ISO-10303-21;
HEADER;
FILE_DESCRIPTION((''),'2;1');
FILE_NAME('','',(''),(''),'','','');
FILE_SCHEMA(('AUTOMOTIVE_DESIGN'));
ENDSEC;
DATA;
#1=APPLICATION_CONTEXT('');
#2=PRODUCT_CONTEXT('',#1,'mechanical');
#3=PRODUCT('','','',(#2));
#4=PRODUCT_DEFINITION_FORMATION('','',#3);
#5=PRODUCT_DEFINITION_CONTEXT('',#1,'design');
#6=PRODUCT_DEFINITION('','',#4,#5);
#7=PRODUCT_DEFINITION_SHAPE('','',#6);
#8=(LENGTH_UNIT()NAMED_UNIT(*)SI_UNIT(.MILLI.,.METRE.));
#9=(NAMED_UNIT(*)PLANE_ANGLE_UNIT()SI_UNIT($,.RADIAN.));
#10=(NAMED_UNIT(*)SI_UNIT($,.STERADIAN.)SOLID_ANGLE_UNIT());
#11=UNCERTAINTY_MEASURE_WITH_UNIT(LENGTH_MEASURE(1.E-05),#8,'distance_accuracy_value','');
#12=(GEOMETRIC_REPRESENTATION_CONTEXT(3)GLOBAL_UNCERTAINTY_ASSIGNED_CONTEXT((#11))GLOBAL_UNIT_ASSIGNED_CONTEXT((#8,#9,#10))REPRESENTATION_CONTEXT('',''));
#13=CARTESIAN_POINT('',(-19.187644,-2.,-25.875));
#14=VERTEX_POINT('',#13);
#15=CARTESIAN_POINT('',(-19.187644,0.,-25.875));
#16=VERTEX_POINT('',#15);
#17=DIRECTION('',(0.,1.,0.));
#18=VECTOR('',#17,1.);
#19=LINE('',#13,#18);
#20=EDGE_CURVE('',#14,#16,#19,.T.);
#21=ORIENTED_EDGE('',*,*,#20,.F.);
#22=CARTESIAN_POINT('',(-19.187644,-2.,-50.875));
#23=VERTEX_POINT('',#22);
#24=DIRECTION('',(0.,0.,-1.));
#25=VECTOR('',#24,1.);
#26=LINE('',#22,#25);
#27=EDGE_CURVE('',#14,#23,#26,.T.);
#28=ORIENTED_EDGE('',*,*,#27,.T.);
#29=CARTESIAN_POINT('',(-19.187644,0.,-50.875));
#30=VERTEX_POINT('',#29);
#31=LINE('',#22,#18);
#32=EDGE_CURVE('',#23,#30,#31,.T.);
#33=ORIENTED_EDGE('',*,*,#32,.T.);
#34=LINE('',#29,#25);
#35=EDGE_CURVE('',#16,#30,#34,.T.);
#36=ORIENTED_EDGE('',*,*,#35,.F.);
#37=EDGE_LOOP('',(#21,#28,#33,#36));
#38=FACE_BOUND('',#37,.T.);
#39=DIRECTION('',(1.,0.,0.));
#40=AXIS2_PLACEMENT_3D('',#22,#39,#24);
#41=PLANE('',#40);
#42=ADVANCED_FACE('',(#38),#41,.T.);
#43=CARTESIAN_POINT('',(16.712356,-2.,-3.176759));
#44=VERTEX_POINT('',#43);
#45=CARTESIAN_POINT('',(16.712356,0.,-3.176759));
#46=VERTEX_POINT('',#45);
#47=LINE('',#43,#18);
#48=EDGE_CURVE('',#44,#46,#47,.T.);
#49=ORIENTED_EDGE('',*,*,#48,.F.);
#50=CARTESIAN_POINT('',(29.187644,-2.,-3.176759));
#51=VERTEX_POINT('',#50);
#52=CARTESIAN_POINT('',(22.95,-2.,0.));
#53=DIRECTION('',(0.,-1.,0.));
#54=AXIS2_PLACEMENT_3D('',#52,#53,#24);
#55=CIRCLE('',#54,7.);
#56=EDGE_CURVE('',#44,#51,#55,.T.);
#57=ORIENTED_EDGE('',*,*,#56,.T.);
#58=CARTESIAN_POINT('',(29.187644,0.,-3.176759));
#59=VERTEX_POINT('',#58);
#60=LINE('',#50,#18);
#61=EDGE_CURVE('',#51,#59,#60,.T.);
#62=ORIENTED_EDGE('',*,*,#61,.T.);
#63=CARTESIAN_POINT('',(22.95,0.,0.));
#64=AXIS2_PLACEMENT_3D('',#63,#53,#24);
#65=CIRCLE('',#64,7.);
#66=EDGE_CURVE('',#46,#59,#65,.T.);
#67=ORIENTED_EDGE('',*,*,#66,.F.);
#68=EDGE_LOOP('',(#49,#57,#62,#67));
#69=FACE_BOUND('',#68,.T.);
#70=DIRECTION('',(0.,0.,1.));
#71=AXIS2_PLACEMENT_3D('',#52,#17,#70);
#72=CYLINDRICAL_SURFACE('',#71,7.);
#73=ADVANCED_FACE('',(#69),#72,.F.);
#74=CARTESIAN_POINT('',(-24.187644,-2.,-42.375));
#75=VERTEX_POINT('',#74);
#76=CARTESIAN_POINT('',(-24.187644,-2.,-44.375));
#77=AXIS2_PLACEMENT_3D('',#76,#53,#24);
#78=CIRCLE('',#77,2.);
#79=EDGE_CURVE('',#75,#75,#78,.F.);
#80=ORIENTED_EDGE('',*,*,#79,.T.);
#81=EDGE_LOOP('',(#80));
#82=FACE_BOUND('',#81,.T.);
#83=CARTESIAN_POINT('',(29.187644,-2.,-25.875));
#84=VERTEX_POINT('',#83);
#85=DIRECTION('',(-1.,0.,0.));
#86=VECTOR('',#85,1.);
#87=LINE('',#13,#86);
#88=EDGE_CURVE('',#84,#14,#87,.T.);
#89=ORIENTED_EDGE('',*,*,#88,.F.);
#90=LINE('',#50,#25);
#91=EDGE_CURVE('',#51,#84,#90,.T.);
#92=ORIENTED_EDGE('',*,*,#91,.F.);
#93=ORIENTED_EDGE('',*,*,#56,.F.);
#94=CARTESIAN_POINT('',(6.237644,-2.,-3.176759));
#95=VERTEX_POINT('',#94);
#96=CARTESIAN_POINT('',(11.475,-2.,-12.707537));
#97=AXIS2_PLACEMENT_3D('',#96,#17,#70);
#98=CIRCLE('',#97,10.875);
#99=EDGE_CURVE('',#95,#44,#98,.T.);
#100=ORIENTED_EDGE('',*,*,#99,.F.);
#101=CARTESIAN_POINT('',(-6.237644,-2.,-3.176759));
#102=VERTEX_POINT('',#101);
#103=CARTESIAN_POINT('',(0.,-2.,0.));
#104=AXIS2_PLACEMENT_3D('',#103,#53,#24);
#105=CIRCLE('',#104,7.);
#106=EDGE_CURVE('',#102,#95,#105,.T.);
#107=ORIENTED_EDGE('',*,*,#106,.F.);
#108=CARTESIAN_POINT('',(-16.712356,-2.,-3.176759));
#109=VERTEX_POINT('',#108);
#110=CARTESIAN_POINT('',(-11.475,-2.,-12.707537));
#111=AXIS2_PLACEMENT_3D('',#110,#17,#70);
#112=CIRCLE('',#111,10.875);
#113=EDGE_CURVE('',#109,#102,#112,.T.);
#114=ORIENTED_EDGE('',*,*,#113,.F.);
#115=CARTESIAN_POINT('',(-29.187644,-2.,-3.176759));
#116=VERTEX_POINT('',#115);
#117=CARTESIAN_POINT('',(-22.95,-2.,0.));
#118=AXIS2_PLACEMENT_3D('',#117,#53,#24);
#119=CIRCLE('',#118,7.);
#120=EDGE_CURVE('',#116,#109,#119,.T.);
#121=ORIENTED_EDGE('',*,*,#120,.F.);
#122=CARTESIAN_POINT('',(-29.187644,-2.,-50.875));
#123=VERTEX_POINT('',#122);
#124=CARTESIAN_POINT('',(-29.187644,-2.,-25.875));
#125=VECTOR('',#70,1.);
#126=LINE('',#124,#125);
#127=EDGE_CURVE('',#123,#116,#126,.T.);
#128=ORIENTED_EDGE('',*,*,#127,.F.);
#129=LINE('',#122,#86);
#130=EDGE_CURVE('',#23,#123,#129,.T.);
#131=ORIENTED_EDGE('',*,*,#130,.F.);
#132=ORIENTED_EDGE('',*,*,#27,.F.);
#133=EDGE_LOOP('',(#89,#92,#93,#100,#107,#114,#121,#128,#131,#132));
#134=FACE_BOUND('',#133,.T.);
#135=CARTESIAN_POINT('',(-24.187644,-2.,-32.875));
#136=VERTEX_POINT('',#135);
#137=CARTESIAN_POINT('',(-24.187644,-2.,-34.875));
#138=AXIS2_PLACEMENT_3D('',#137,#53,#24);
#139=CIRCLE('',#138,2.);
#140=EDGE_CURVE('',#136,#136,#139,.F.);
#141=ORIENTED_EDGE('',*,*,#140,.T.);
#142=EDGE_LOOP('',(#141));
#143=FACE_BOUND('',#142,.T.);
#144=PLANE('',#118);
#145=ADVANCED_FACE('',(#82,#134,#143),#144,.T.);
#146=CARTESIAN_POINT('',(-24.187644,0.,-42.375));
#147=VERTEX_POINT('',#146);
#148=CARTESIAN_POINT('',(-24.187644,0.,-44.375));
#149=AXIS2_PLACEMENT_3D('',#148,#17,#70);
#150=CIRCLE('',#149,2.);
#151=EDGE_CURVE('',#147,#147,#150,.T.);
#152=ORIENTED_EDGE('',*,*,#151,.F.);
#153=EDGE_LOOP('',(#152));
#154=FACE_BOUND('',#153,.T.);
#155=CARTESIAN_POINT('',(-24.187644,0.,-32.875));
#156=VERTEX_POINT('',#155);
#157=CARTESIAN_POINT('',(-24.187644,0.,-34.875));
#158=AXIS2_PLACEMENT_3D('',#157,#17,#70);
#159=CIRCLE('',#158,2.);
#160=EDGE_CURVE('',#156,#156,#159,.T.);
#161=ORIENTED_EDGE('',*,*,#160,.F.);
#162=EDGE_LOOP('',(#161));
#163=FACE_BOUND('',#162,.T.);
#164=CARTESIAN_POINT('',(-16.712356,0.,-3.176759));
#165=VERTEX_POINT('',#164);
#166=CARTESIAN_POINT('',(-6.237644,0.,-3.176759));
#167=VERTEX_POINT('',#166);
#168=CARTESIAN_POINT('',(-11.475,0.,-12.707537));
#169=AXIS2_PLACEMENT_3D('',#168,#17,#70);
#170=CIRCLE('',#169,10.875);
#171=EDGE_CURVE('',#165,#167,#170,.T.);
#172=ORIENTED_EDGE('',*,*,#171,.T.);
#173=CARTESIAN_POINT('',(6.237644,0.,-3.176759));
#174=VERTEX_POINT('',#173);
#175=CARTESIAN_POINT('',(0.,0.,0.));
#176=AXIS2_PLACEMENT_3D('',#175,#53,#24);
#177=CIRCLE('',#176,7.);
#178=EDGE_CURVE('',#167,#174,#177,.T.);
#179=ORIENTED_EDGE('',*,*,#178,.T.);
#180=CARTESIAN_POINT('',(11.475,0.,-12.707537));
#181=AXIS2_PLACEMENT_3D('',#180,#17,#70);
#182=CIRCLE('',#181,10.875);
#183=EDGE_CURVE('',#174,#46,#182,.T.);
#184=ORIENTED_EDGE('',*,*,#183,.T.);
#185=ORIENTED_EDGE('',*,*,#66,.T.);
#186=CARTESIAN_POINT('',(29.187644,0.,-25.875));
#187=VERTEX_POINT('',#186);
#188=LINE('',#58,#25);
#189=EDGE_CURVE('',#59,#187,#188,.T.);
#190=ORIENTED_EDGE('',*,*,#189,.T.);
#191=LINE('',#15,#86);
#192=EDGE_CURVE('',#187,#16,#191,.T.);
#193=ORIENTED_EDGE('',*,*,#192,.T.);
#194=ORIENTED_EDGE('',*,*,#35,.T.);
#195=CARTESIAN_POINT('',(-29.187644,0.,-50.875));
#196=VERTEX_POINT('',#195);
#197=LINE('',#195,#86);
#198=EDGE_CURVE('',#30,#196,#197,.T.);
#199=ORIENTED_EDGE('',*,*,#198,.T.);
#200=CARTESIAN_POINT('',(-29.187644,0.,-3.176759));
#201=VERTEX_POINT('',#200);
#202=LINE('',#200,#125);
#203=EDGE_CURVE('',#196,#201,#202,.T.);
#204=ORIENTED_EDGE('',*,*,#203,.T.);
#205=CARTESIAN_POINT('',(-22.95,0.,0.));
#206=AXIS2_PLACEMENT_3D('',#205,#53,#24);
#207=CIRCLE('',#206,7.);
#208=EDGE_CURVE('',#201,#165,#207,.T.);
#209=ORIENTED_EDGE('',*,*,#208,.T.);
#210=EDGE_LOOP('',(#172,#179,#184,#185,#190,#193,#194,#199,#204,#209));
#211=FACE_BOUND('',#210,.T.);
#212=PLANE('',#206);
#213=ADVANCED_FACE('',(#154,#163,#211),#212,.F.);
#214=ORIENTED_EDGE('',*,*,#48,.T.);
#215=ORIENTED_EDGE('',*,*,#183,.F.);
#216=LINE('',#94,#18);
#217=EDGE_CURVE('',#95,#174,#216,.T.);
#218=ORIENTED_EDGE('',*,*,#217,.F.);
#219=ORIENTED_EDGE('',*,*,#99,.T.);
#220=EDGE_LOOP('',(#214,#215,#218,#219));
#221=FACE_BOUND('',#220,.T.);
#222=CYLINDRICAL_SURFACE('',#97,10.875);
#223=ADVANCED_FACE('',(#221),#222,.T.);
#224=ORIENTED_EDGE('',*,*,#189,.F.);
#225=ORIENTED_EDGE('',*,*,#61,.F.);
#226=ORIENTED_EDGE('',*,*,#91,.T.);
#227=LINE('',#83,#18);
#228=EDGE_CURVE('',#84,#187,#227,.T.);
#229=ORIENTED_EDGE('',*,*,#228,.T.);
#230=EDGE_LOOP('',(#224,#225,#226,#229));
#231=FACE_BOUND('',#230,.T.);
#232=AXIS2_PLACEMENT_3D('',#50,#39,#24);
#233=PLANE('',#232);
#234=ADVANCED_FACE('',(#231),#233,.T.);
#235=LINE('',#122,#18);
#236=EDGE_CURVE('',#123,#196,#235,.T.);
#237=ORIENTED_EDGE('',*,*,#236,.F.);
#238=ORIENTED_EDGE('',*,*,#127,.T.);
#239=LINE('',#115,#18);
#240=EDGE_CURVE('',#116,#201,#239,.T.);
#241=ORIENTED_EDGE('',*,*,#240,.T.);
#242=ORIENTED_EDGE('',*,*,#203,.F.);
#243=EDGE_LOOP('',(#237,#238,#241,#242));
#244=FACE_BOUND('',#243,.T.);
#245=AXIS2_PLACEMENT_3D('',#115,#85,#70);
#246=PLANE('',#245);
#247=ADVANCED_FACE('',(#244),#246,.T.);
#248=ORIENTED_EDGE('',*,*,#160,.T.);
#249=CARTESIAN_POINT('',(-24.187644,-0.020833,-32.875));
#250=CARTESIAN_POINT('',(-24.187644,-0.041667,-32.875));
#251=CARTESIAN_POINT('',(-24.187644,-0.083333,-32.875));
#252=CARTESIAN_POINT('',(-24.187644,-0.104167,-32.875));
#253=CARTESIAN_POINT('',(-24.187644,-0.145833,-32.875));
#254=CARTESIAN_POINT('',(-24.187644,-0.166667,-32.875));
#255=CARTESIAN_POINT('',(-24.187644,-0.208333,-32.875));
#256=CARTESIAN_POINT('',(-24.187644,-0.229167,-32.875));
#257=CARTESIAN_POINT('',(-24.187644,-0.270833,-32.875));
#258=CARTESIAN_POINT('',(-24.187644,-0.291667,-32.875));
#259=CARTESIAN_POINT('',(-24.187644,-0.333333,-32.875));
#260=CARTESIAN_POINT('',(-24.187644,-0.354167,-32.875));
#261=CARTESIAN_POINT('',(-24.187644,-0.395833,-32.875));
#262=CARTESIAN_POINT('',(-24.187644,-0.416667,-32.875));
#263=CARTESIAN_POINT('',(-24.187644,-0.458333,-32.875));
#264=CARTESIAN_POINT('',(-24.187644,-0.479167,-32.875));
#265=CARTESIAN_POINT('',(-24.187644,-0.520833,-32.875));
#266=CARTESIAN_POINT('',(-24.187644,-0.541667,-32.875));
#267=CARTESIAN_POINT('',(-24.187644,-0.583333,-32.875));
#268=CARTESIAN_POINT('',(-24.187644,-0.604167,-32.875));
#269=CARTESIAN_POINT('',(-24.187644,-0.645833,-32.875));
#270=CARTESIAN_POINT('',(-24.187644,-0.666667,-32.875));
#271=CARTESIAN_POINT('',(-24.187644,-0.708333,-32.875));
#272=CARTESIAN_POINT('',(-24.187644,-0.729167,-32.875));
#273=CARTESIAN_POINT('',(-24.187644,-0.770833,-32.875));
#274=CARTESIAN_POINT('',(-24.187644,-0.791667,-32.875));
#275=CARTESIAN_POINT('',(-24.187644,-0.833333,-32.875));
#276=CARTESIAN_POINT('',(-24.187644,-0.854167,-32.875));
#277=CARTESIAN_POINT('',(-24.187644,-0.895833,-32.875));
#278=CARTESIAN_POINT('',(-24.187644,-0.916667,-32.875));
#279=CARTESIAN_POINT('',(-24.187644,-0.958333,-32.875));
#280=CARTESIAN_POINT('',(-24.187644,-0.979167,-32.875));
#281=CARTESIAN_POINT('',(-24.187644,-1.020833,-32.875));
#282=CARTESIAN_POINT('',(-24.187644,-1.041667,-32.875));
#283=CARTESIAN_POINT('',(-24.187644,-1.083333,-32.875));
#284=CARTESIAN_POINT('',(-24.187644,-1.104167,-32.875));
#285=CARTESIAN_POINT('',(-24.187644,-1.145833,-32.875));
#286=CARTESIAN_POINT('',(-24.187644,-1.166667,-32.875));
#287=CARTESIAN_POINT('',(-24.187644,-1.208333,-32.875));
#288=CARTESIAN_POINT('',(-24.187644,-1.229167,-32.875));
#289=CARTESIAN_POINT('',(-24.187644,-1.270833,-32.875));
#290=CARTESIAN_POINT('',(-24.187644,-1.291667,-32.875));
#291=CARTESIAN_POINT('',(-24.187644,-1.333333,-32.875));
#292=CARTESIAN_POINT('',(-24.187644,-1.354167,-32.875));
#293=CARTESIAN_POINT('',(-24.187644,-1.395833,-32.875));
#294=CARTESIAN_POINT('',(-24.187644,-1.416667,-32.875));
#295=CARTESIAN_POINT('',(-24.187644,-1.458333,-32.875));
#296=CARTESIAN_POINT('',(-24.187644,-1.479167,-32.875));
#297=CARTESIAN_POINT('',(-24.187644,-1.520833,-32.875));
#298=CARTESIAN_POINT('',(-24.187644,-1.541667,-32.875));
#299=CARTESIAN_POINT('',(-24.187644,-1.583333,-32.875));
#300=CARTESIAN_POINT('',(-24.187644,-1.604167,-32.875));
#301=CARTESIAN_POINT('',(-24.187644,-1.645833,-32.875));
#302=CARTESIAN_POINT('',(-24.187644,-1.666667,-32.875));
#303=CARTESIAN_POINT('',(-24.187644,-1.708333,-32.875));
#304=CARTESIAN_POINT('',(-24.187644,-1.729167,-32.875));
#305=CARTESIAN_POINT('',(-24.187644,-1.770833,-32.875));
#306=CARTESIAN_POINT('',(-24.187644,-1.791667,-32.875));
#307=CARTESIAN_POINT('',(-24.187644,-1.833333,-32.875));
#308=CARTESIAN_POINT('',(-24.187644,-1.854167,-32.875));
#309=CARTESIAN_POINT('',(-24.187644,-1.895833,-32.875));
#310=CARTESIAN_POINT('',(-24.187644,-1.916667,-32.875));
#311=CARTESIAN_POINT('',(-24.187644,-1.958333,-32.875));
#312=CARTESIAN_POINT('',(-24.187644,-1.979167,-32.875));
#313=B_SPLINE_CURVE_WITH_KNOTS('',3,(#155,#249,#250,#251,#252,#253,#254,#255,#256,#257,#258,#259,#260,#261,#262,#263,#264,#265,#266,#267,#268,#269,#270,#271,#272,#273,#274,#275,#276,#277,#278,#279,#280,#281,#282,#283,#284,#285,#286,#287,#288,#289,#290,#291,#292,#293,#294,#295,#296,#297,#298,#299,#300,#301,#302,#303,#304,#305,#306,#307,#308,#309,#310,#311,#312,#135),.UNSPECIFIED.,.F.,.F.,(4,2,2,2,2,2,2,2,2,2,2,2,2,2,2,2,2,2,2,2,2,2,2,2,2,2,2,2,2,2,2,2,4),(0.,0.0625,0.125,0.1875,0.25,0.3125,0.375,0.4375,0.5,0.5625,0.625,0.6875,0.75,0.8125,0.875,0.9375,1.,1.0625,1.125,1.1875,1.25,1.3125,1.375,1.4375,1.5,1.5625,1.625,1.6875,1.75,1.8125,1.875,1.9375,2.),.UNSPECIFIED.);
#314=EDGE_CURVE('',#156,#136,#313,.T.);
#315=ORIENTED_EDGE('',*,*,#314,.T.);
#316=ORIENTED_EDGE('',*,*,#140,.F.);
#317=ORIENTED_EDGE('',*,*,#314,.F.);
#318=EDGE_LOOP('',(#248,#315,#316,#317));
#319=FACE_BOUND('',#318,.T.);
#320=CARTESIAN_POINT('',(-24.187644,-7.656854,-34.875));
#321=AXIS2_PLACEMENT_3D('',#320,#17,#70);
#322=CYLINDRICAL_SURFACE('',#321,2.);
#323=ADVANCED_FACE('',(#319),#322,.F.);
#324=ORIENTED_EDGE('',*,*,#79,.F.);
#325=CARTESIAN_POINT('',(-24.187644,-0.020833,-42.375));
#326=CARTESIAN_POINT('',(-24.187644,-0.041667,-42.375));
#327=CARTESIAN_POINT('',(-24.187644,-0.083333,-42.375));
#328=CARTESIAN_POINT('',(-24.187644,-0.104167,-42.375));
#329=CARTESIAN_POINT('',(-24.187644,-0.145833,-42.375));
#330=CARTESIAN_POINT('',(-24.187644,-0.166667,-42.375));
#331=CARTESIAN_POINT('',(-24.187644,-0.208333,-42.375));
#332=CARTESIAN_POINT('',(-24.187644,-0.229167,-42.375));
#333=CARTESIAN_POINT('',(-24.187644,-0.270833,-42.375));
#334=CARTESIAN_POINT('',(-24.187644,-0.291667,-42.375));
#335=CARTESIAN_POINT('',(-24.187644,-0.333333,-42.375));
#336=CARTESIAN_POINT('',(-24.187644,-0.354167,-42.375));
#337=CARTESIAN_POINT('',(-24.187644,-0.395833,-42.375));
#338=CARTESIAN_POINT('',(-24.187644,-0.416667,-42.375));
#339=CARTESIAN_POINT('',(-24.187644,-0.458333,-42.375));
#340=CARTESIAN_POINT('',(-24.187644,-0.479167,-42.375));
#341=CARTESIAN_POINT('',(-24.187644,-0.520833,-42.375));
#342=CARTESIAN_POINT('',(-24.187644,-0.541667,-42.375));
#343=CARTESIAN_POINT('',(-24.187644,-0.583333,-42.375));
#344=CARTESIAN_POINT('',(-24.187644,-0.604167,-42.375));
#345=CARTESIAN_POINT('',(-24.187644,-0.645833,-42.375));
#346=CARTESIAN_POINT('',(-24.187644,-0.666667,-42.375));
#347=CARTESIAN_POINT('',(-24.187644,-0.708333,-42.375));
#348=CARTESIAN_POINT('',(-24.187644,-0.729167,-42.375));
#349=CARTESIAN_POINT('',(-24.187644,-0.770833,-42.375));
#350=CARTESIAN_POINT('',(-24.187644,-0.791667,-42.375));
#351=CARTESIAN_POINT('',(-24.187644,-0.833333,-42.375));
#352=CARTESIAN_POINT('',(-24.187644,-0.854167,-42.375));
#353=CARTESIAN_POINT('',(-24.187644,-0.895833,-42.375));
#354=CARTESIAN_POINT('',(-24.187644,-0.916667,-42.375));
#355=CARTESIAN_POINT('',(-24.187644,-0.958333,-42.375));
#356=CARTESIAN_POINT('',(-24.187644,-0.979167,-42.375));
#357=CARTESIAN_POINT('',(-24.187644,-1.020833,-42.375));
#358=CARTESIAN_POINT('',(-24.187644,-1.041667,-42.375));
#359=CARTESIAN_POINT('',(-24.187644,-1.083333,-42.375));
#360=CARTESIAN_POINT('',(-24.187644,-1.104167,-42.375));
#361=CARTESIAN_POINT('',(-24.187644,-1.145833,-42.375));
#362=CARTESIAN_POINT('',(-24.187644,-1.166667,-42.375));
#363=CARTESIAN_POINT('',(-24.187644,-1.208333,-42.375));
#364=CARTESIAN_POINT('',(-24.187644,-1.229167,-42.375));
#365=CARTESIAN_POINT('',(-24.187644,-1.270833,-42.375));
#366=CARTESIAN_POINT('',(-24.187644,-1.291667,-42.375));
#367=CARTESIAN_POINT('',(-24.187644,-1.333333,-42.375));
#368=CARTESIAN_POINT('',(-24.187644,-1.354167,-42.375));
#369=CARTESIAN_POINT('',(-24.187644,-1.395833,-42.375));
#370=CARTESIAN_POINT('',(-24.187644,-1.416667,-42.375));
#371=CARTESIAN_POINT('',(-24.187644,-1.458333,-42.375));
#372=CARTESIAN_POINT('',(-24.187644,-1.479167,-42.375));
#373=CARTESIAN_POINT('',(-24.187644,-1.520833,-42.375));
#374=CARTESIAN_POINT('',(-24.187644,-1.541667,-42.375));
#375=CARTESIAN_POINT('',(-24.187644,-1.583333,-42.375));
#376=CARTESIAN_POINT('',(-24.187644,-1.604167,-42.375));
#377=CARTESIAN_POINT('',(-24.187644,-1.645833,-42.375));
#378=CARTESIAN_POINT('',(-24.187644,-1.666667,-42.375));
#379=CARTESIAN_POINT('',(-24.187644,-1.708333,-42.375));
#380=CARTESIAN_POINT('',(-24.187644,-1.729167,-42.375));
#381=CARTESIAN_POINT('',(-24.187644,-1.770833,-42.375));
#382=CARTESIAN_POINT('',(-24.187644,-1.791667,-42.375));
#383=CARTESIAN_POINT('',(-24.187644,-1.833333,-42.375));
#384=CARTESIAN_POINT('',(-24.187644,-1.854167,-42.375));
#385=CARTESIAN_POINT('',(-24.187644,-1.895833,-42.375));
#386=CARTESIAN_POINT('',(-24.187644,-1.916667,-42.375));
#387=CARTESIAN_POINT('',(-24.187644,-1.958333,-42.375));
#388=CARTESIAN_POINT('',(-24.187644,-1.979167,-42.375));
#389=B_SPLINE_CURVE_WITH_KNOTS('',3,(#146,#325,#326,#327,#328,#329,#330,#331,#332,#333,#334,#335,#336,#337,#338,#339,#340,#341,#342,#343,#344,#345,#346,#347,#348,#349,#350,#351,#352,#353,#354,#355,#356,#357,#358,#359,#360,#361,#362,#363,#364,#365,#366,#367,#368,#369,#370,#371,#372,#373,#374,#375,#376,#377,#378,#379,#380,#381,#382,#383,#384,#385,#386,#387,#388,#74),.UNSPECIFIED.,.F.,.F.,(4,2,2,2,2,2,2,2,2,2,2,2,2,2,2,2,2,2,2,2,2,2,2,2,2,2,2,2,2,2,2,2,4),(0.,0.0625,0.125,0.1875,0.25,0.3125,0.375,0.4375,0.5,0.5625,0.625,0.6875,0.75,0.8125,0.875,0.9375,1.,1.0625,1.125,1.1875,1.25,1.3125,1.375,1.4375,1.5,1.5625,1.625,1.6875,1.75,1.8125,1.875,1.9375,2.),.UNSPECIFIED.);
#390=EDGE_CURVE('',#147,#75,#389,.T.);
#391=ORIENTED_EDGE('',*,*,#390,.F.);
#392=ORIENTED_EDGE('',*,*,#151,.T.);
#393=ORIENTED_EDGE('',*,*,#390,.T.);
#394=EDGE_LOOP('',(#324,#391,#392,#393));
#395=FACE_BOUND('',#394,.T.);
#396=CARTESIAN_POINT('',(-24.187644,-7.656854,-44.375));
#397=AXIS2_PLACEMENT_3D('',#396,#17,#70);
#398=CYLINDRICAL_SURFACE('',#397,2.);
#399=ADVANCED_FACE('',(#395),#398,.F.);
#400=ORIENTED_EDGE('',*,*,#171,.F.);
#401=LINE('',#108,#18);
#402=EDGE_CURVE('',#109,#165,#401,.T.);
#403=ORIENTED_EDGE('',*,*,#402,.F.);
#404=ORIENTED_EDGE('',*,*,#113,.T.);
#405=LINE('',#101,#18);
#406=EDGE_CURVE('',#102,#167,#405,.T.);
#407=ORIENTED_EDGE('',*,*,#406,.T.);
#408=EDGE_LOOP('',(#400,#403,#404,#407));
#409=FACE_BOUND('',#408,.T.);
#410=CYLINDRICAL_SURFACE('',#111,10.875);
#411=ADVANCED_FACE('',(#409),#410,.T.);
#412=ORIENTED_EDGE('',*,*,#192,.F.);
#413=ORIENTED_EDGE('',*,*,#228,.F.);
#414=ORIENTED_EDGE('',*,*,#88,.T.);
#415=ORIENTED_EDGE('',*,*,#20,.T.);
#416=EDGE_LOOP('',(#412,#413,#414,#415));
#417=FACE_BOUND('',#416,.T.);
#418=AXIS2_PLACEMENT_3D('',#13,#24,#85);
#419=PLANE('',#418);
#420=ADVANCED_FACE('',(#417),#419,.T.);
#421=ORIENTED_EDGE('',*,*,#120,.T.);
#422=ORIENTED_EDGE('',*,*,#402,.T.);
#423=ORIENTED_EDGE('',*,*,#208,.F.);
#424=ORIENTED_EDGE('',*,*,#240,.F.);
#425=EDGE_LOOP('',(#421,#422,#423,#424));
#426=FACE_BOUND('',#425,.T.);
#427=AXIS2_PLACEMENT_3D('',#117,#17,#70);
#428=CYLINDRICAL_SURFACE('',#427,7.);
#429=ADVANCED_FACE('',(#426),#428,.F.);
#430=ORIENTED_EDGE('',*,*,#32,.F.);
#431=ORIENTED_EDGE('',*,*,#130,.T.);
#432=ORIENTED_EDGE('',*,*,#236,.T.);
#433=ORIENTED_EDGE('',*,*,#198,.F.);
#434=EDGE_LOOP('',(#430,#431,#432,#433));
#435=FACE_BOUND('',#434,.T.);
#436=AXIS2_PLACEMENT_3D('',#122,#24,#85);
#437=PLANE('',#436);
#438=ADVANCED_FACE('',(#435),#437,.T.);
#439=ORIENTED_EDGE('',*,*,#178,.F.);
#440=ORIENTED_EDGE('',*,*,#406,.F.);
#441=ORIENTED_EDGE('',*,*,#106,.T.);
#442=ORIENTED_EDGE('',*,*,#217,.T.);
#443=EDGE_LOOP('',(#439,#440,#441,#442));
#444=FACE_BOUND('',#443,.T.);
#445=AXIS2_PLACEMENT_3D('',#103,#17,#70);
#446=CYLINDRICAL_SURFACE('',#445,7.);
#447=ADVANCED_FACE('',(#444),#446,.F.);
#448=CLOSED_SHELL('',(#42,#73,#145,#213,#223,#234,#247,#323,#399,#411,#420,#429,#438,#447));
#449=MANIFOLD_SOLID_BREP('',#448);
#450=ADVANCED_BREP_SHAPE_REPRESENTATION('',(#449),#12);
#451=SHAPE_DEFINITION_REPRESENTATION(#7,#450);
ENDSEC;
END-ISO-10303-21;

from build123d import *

# Parameters (mm, degrees)
BASE_FLANGE1_START = -2
BASE_FLANGE1_DEPTH = 2
SKETCH8_R          = 2
CUT_EXTRUDE1_DEPTH = 2


# Read off the part's stored shape, not the designer's step: Base-Flange1
with BuildPart() as part:
    # Base-Flange1 outline → Base-Flange1 (new body)
    with BuildSketch(Plane(origin=(0, 0, 0), x_dir=(1, 0, 0), z_dir=(0, 1, 0)).offset(BASE_FLANGE1_START)):
        with BuildLine():
            ThreePointArc((-29.187643745, 3.176759435), (-22.95, 7), (-16.712356255, 3.176759435))
            ThreePointArc((-16.712356255, 3.176759435), (-11.475, 1.832537182), (-6.237643745, 3.176759435))
            ThreePointArc((-6.237643745, 3.176759435), (0, 7), (6.237643745, 3.176759435))
            ThreePointArc((6.237643745, 3.176759435), (11.475, 1.832537182), (16.712356255, 3.176759435))
            ThreePointArc((16.712356255, 3.176759435), (22.95, 7), (29.187643745, 3.176759435))
            Line((29.187643745, 3.176759435), (29.187643745, 25.875))
            Line((29.187643745, 25.875), (-19.187643745, 25.875))
            Line((-19.187643745, 25.875), (-19.187643745, 50.875))
            Line((-19.187643745, 50.875), (-29.187643745, 50.875))
            Line((-29.187643745, 50.875), (-29.187643745, 3.176759435))
        make_face()
    extrude(amount=BASE_FLANGE1_DEPTH)

    # Sketch8 → Cut-Extrude1 (cut)
    with BuildSketch(Plane(origin=(0, 0, 0), x_dir=(1, 0, 0), z_dir=(0, 1, 0))):
        with Locations(Location((-24.187643745, 44.375, 0), (0, 0, 270))):
            Circle(SKETCH8_R)
        with Locations(Location((-24.187643745, 34.875, 0), (0, 0, 270))):
            Circle(SKETCH8_R)
    extrude(amount=-CUT_EXTRUDE1_DEPTH, mode=Mode.SUBTRACT)


solid = part.part
